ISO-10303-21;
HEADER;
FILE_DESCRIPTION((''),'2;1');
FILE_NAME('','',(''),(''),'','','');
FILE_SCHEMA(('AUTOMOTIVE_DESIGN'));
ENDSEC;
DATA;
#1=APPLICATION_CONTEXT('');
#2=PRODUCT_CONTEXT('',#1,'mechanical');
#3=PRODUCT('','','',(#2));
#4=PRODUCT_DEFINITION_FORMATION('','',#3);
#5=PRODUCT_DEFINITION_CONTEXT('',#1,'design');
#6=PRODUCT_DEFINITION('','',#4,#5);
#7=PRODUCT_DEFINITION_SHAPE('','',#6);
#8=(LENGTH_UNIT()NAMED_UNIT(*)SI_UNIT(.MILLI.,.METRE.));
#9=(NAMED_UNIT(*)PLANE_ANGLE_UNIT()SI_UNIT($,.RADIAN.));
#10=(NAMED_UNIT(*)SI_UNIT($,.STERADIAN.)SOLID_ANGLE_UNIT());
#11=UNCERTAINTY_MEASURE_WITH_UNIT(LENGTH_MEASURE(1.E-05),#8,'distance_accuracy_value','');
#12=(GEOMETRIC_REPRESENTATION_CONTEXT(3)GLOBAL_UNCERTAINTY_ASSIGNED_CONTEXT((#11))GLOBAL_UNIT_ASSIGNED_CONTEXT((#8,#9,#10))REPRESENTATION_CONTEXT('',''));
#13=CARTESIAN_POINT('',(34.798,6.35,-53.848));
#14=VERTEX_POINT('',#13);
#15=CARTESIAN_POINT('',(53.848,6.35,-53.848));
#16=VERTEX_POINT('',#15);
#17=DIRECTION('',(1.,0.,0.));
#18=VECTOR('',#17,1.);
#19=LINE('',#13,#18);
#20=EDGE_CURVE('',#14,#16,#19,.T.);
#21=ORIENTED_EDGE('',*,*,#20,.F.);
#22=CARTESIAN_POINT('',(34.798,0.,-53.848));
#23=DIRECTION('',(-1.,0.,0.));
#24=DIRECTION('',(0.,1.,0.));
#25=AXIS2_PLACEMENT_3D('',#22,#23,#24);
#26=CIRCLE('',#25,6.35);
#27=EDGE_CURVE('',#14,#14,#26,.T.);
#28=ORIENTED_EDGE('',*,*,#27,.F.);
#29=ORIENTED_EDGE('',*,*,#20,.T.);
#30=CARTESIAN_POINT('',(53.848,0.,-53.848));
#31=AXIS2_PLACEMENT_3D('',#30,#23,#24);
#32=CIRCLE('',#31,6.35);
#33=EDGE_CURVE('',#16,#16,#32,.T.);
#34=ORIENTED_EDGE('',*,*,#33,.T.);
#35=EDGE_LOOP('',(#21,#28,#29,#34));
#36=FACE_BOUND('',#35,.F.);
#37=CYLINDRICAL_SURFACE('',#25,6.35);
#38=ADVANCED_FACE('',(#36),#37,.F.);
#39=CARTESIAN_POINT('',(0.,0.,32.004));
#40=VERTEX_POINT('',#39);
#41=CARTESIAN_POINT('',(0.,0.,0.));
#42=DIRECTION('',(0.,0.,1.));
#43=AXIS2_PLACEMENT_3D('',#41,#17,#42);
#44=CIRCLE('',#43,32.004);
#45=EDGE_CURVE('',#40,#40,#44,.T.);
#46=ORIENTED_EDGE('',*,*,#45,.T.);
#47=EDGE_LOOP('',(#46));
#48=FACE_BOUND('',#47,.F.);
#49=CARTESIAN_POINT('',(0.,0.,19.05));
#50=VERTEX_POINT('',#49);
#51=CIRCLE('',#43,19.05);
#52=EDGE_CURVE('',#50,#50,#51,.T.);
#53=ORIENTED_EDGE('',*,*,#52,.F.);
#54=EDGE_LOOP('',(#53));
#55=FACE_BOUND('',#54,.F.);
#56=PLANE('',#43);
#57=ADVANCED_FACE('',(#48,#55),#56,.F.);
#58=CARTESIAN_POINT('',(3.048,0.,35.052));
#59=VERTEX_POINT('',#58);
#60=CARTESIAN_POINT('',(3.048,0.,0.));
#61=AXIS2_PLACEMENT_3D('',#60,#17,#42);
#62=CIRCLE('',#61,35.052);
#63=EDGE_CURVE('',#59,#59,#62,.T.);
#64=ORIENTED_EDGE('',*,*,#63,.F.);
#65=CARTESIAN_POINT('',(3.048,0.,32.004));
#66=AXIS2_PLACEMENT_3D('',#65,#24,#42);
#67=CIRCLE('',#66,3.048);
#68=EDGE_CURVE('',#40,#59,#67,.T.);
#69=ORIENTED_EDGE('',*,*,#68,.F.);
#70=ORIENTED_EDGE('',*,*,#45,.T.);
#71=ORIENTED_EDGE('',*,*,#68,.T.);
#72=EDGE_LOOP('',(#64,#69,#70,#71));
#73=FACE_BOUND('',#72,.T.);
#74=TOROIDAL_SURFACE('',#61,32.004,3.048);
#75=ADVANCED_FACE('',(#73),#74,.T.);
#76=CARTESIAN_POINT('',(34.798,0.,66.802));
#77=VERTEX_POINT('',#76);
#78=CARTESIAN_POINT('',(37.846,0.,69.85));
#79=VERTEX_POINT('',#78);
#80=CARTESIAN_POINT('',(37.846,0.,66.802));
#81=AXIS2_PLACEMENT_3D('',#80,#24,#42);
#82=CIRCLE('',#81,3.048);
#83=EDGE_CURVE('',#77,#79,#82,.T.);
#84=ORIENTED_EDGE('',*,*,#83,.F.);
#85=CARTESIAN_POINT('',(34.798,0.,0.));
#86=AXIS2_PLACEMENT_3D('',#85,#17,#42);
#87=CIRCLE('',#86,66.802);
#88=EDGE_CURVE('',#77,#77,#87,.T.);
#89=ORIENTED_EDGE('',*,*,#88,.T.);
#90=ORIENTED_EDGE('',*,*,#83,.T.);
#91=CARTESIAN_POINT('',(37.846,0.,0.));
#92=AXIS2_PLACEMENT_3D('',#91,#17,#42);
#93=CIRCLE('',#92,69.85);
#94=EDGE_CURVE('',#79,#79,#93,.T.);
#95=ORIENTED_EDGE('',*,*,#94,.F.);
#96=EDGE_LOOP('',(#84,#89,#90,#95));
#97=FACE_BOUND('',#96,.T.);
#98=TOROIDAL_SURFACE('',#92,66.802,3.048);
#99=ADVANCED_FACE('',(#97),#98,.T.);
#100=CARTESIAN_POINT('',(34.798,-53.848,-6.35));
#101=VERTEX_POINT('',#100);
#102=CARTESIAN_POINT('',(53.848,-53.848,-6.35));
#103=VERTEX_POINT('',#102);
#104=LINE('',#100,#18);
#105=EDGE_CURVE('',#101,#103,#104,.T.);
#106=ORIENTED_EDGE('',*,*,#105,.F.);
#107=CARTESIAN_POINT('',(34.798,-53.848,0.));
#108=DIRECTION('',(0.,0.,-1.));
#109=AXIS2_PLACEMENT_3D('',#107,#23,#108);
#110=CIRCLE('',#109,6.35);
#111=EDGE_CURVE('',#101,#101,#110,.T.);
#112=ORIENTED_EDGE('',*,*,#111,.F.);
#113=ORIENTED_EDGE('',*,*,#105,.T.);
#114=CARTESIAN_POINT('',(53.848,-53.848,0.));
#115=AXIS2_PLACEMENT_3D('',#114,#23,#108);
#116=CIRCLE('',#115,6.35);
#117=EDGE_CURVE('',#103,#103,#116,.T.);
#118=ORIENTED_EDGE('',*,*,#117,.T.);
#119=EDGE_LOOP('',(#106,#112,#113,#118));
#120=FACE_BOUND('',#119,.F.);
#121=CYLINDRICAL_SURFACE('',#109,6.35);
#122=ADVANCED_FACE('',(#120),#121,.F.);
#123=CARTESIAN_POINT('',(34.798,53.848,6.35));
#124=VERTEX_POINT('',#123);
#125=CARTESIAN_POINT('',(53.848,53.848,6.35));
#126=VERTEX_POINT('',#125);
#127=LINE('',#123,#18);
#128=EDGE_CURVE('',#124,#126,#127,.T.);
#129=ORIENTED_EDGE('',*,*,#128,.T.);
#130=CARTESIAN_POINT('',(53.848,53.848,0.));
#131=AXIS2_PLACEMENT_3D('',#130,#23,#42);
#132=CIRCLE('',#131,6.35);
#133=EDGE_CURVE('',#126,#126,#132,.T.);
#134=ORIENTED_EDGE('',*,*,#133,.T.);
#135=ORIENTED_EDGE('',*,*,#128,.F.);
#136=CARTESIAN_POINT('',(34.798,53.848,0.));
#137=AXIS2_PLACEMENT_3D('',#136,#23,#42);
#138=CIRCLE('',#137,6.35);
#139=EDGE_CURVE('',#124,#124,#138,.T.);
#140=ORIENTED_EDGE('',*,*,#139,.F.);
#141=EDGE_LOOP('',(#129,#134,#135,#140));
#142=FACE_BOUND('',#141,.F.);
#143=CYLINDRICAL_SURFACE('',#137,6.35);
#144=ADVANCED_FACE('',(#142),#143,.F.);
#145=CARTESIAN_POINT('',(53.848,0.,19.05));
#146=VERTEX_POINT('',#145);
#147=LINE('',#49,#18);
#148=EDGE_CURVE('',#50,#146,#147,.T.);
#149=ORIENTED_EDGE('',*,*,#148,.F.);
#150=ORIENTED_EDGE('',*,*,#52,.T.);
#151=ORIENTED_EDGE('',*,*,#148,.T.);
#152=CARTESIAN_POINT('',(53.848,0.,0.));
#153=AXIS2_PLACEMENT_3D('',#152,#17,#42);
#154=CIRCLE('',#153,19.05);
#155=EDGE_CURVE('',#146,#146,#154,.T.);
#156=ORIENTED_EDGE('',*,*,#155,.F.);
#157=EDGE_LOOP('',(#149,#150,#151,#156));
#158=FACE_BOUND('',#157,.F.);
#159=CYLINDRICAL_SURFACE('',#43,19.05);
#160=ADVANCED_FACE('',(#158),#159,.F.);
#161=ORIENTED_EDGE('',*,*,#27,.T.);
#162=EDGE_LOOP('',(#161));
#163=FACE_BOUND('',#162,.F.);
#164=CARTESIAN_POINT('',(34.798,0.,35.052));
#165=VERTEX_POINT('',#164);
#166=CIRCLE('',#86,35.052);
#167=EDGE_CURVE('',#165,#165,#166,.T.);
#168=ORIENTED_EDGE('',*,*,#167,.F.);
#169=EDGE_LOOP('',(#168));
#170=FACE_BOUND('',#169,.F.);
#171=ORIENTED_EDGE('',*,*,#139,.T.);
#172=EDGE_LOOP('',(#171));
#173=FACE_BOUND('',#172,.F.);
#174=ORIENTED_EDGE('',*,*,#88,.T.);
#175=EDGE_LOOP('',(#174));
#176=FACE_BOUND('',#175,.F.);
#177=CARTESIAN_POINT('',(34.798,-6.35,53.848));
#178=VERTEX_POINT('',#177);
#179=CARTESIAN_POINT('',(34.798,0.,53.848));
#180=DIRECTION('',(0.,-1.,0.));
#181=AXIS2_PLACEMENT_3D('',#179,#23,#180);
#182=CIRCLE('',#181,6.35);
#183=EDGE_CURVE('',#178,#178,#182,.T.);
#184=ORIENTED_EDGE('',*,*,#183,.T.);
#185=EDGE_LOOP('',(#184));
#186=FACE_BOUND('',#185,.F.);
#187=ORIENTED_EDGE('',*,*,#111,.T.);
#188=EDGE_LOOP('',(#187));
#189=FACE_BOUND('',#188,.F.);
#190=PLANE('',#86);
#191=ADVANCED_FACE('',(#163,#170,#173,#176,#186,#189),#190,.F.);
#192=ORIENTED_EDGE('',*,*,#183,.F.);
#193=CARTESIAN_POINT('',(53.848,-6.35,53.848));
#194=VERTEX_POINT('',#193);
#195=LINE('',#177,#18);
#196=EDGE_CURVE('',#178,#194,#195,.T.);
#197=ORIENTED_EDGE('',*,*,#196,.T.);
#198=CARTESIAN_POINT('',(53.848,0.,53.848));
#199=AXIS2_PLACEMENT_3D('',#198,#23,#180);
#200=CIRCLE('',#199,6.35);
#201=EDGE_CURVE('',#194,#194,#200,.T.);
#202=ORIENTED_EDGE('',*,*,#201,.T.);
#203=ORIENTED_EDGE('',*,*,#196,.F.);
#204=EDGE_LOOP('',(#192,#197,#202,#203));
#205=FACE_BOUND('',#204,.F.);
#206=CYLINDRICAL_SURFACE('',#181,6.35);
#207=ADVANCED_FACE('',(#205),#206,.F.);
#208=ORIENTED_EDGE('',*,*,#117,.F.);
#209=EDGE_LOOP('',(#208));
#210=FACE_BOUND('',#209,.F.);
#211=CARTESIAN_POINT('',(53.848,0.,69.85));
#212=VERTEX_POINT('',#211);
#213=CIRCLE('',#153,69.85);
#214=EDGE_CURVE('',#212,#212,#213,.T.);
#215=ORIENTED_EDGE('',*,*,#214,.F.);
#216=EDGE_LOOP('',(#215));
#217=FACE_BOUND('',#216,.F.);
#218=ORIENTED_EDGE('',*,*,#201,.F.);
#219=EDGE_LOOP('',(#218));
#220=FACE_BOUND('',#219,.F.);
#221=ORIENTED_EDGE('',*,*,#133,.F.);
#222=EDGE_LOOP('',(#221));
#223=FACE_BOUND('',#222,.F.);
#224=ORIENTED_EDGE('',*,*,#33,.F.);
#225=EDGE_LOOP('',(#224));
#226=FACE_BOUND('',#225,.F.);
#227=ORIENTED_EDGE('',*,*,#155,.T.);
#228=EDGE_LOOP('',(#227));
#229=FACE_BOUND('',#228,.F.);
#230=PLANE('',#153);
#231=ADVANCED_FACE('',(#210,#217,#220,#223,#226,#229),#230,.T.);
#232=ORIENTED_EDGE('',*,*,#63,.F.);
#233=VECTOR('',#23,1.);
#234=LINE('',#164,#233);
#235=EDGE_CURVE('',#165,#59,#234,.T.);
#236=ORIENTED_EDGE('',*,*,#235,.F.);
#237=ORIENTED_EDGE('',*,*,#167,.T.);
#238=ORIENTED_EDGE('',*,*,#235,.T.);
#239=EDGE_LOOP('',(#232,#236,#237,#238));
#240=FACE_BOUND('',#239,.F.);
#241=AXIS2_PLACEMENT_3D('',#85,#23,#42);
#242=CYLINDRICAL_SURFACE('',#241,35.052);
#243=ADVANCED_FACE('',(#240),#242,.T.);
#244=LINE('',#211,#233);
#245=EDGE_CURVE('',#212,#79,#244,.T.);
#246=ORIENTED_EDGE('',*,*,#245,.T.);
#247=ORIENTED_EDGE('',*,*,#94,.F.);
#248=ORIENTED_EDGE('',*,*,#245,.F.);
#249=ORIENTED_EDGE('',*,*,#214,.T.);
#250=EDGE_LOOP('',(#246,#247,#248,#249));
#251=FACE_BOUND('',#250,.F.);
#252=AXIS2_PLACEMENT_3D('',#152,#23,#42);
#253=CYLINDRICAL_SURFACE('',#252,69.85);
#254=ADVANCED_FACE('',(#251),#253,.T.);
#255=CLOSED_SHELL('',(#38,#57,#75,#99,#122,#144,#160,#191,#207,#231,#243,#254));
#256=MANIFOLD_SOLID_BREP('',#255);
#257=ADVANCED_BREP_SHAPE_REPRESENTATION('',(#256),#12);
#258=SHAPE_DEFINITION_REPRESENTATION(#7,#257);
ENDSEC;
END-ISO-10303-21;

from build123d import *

# Parameters (mm, degrees)
F2_R            = 6.35
F3_DEPTH        = 19.051
F3_COPIES_COUNT = 4
F4_R            = 3.048


# Not quite as in the source:
# - a pattern or mirror of a feature is missing from the dataset's text; its kind, count and spacing are read off the source's solid


with BuildPart() as f1:
    # F0 (on Front) → F1 (revolve)
    with BuildSketch(Plane.XZ):
        Polygon((0, 35.052), (0, 19.05), (53.848, 19.05), (53.848, 69.85), (34.798, 69.85), (34.798, 35.052), align=None)
    revolve(axis=Axis((26.924, 0, 0), (1, 0, 0)))

    # F2 (on face) → F3 (cut, through all)
    with BuildSketch(Plane(origin=(34.798, 0, 0), x_dir=(0, -1, 0), z_dir=(-1, 0, 0))):
        with Locations((0, 53.848)):
            Circle(F2_R)
    f3 = extrude(amount=-F3_DEPTH, mode=Mode.SUBTRACT)

    # F3_copies: F3 ×4 about axis
    f3_copies_axis = Axis((0, 0, 0), (1, 0, 0))
    for i in range(1, F3_COPIES_COUNT):
        add(f3.rotate(f3_copies_axis, i * 360 / F3_COPIES_COUNT), mode=Mode.SUBTRACT)

    # F4
    f4_edges = [f1.edges().sort_by_distance(p)[0] for p in [
        (0, 0, -35.052),
        (34.798, 0, -69.85),
    ]]
    fillet(f4_edges, radius=F4_R)


solid = f1.part
